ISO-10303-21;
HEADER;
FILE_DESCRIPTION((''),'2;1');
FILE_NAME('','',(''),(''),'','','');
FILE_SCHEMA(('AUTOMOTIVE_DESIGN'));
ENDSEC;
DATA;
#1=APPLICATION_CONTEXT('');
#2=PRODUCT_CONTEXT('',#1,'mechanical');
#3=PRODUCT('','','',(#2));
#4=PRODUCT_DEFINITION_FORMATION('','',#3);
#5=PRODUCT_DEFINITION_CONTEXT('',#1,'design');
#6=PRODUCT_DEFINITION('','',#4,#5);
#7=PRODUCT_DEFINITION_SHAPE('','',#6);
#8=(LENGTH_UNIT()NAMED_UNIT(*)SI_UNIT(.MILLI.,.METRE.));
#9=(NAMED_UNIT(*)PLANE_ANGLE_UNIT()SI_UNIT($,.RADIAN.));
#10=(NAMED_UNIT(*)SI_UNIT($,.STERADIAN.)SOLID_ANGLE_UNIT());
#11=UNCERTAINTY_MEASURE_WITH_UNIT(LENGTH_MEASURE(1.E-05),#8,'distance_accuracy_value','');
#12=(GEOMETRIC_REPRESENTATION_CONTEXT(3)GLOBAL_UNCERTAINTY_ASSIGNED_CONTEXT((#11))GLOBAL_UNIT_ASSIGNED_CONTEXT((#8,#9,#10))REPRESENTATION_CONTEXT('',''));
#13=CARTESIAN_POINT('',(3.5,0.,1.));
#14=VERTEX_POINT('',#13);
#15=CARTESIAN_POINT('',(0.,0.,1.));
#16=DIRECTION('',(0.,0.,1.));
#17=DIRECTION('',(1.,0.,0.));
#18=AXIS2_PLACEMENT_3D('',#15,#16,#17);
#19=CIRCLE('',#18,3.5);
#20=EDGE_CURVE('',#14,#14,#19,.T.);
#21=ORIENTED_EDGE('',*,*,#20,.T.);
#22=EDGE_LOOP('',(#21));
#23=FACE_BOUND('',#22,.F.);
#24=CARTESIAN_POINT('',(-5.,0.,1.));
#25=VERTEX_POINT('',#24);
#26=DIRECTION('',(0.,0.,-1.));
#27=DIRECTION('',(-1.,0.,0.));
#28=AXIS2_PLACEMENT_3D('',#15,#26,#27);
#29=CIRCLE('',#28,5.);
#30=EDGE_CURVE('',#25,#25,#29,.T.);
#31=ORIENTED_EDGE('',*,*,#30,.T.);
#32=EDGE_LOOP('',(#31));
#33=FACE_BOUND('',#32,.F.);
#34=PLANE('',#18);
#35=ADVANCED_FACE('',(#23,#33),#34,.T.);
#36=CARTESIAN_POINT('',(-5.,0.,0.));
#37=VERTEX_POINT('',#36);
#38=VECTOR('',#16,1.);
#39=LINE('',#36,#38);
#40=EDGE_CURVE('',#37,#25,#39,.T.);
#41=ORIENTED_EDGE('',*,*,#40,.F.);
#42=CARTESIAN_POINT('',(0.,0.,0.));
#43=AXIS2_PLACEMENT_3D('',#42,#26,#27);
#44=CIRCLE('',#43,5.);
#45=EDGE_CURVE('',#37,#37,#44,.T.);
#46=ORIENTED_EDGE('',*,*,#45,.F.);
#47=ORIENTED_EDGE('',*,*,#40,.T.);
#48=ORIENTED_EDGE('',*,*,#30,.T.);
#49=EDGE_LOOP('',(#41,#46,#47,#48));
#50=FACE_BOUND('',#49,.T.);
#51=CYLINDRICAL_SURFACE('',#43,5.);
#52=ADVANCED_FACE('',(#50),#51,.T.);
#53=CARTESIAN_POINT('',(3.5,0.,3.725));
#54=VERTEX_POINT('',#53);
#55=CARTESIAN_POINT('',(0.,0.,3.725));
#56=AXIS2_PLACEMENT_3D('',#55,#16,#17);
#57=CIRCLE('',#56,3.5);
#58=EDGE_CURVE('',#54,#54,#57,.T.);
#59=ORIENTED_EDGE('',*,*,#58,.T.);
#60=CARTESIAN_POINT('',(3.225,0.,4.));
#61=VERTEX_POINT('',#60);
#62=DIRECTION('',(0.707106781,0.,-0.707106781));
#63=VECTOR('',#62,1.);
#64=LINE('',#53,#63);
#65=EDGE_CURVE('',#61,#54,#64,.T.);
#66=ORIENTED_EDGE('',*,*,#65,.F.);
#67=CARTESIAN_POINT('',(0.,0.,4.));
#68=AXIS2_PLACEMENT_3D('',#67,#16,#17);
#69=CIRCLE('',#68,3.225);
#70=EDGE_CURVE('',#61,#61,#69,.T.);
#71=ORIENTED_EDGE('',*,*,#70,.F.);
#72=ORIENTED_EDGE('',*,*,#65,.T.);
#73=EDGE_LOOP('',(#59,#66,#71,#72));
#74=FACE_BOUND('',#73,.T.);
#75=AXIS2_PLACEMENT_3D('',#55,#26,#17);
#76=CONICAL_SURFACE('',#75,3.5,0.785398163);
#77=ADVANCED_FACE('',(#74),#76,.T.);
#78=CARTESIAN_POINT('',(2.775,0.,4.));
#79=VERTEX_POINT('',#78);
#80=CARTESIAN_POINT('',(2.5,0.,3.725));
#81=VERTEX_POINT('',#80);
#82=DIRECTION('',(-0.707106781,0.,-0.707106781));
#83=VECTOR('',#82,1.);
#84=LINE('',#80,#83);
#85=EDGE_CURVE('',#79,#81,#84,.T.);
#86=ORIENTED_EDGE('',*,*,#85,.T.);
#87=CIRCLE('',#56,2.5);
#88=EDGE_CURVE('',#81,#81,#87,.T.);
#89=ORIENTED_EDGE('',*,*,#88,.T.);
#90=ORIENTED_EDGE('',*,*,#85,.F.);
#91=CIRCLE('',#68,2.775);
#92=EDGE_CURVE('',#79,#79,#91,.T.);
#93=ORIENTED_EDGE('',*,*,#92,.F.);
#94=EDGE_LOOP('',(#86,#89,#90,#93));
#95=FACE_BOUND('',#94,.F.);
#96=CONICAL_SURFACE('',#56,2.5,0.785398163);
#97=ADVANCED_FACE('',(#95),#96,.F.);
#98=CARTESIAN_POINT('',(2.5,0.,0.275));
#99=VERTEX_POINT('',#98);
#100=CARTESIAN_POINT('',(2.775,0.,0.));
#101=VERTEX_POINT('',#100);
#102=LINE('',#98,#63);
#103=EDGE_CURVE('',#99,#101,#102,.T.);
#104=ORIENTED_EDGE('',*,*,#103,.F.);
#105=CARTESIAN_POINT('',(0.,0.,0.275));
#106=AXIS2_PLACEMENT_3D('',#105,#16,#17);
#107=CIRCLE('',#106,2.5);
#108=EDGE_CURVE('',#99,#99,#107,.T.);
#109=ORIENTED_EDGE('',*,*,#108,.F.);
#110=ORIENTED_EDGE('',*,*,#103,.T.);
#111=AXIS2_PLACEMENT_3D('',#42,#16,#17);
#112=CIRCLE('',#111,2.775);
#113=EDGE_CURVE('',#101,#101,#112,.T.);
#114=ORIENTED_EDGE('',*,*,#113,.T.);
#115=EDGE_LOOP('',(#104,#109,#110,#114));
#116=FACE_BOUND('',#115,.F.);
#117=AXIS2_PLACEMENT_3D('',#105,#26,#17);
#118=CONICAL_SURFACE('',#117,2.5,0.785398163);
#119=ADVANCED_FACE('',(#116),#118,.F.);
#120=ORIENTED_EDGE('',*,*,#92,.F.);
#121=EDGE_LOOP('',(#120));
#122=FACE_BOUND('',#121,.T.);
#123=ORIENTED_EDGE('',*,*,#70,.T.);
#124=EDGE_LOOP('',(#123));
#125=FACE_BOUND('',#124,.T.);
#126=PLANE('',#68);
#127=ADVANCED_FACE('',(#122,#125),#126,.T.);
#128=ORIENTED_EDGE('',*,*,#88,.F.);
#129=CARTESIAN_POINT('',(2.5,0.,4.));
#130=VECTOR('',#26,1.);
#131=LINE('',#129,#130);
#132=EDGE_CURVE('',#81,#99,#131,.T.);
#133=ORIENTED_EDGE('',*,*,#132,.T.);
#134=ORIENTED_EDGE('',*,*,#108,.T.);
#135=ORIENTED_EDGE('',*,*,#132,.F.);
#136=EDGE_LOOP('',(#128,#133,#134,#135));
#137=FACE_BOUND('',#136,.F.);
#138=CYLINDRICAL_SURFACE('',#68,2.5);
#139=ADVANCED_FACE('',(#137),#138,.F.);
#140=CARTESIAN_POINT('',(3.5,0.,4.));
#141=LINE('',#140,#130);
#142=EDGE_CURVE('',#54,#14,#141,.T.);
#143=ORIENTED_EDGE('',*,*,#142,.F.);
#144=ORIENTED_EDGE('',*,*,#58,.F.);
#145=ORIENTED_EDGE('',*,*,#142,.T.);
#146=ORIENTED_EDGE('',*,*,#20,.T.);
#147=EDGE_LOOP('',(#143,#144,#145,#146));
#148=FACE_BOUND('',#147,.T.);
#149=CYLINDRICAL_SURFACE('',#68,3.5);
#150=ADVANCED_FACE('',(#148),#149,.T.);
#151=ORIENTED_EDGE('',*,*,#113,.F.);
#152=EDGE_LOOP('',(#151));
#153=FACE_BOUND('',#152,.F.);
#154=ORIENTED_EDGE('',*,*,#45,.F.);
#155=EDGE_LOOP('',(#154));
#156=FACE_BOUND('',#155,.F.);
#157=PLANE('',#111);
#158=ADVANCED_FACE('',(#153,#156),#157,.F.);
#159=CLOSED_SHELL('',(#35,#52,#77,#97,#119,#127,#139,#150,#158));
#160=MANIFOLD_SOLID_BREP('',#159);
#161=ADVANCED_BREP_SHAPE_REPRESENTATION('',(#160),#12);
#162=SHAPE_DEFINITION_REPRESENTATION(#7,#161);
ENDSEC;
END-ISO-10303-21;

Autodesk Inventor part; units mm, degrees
ref_plane "YZ Plane" through (0, 0, 0) normal (1, 0, 0) x (0, 1, 0)
ref_plane "XZ Plane" through (0, 0, 0) normal (0, 1, 0) x (-1, 0, 0)
ref_plane "XY Plane" through (0, 0, 0) normal (0, 0, 1) x (1, 0, 0)
sketch "スケッチ1" plane through (0, 0, 0) normal (0, 1, 0) x (-1, 0, 0)
  line L0 (-3, 0.3) -> (-3, 3.7)
  line L1 (-3.3, 4) -> (-3.7, 4)
  line L2 (-4, 3) -> (-4, 1)
  line L3 (-4, 1) -> (-6, 1)
  line L4 (-6, 1) -> (-6, 0)
  line L5 (-6, 0) -> (-3.3, 0)
  line L6 (-3, 3.7) -> (-3.3, 4)
  line L7 (-3, 0.3) -> (-3.3, 0)
  line L8 (-3.7, 4) -> (-4, 3)
  line L9 (0, -0.8) -> (0, 4.8) projected
  point P0 (0, 0)
  point P1 (-3, 0)
  point P2 (-3, 4)
  point P3 (-4, 4)
  dimension "d2" = 1
  dimension "d9" = 1
  dimension "d11" = 6
  dimension "d12" = 8
  dimension "d13" = 12
  dimension "d14" = 0.3
  dimension "d15" = 0.3
  dimension "d16" = 0.3
  dimension "d17" = 0.3
  dimension "d18" = 0.3
  dimension "d19" = 4
revolve "回転1" add sketch "スケッチ1" angle 360 about axis through (0, 0, -10) along (0, 0, 1)
sketch "스케치2" plane through (0, 0, 0) normal (0, 0, -1) x (-1, 0, 0)
  circle A0 centre (0, 0) radius 3.3 projected
  circle A1 centre (0, 0) radius 6 projected
  circle A2 centre (0, 0) radius 3.025
  dimension "d20" = 6.05
extrude "돌출1" cut sketch "스케치2" against normal up to surface (4 mm away) contours A2
sketch "스케치3" plane through (0, 0, 0) normal (0, 0, -1) x (-1, 0, 0)
  circle A0 centre (0, 0) radius 3.3 projected
  circle A1 centre (0, 0) radius 6 projected
  circle A2 centre (0, 0) radius 5
  dimension "d23" = 10
extrude "돌출2" cut sketch "스케치3" against normal through all contours A1
sketch "스케치4" plane through (0, 0, 4) normal (0, 0, 1) x (1, 0, 0)
  circle A0 centre (0, 0) radius 4 projected
  circle A1 centre (0, 0) radius 3.7 projected
  circle A2 centre (0, 0) radius 2.5
  dimension "d26" = 5
extrude "돌출3" add sketch "스케치4" against normal up to surface (4 mm away) contours A0 | A1
sketch "스케치5" plane through (0, 0, 4) normal (0, 0, 1) x (1, 0, 0)
  circle A0 centre (0, 0) radius 3.5
  circle A1 centre (0, 0) radius 4 projected
  circle A2 centre (0, 0) radius 2.5 projected
  dimension "d29" = 7
extrude "돌출4" cut sketch "스케치5" against normal up to surface (3 mm away) contours A1
chamfer "모따기1" distance 0.275 angle 45 1 edges at (-3.5, 0, 4)
chamfer "모따기2" distance 0.275 angle 45 2 edges at (-2.5, 0, 4) (-2.5, 0, 0)
equation "\"d15\" = d14"
equation "\"d16\" = d14"
equation "\"d17\" = d16"
equation "\"d18\" = d14"
properties part number "80F-0503"
